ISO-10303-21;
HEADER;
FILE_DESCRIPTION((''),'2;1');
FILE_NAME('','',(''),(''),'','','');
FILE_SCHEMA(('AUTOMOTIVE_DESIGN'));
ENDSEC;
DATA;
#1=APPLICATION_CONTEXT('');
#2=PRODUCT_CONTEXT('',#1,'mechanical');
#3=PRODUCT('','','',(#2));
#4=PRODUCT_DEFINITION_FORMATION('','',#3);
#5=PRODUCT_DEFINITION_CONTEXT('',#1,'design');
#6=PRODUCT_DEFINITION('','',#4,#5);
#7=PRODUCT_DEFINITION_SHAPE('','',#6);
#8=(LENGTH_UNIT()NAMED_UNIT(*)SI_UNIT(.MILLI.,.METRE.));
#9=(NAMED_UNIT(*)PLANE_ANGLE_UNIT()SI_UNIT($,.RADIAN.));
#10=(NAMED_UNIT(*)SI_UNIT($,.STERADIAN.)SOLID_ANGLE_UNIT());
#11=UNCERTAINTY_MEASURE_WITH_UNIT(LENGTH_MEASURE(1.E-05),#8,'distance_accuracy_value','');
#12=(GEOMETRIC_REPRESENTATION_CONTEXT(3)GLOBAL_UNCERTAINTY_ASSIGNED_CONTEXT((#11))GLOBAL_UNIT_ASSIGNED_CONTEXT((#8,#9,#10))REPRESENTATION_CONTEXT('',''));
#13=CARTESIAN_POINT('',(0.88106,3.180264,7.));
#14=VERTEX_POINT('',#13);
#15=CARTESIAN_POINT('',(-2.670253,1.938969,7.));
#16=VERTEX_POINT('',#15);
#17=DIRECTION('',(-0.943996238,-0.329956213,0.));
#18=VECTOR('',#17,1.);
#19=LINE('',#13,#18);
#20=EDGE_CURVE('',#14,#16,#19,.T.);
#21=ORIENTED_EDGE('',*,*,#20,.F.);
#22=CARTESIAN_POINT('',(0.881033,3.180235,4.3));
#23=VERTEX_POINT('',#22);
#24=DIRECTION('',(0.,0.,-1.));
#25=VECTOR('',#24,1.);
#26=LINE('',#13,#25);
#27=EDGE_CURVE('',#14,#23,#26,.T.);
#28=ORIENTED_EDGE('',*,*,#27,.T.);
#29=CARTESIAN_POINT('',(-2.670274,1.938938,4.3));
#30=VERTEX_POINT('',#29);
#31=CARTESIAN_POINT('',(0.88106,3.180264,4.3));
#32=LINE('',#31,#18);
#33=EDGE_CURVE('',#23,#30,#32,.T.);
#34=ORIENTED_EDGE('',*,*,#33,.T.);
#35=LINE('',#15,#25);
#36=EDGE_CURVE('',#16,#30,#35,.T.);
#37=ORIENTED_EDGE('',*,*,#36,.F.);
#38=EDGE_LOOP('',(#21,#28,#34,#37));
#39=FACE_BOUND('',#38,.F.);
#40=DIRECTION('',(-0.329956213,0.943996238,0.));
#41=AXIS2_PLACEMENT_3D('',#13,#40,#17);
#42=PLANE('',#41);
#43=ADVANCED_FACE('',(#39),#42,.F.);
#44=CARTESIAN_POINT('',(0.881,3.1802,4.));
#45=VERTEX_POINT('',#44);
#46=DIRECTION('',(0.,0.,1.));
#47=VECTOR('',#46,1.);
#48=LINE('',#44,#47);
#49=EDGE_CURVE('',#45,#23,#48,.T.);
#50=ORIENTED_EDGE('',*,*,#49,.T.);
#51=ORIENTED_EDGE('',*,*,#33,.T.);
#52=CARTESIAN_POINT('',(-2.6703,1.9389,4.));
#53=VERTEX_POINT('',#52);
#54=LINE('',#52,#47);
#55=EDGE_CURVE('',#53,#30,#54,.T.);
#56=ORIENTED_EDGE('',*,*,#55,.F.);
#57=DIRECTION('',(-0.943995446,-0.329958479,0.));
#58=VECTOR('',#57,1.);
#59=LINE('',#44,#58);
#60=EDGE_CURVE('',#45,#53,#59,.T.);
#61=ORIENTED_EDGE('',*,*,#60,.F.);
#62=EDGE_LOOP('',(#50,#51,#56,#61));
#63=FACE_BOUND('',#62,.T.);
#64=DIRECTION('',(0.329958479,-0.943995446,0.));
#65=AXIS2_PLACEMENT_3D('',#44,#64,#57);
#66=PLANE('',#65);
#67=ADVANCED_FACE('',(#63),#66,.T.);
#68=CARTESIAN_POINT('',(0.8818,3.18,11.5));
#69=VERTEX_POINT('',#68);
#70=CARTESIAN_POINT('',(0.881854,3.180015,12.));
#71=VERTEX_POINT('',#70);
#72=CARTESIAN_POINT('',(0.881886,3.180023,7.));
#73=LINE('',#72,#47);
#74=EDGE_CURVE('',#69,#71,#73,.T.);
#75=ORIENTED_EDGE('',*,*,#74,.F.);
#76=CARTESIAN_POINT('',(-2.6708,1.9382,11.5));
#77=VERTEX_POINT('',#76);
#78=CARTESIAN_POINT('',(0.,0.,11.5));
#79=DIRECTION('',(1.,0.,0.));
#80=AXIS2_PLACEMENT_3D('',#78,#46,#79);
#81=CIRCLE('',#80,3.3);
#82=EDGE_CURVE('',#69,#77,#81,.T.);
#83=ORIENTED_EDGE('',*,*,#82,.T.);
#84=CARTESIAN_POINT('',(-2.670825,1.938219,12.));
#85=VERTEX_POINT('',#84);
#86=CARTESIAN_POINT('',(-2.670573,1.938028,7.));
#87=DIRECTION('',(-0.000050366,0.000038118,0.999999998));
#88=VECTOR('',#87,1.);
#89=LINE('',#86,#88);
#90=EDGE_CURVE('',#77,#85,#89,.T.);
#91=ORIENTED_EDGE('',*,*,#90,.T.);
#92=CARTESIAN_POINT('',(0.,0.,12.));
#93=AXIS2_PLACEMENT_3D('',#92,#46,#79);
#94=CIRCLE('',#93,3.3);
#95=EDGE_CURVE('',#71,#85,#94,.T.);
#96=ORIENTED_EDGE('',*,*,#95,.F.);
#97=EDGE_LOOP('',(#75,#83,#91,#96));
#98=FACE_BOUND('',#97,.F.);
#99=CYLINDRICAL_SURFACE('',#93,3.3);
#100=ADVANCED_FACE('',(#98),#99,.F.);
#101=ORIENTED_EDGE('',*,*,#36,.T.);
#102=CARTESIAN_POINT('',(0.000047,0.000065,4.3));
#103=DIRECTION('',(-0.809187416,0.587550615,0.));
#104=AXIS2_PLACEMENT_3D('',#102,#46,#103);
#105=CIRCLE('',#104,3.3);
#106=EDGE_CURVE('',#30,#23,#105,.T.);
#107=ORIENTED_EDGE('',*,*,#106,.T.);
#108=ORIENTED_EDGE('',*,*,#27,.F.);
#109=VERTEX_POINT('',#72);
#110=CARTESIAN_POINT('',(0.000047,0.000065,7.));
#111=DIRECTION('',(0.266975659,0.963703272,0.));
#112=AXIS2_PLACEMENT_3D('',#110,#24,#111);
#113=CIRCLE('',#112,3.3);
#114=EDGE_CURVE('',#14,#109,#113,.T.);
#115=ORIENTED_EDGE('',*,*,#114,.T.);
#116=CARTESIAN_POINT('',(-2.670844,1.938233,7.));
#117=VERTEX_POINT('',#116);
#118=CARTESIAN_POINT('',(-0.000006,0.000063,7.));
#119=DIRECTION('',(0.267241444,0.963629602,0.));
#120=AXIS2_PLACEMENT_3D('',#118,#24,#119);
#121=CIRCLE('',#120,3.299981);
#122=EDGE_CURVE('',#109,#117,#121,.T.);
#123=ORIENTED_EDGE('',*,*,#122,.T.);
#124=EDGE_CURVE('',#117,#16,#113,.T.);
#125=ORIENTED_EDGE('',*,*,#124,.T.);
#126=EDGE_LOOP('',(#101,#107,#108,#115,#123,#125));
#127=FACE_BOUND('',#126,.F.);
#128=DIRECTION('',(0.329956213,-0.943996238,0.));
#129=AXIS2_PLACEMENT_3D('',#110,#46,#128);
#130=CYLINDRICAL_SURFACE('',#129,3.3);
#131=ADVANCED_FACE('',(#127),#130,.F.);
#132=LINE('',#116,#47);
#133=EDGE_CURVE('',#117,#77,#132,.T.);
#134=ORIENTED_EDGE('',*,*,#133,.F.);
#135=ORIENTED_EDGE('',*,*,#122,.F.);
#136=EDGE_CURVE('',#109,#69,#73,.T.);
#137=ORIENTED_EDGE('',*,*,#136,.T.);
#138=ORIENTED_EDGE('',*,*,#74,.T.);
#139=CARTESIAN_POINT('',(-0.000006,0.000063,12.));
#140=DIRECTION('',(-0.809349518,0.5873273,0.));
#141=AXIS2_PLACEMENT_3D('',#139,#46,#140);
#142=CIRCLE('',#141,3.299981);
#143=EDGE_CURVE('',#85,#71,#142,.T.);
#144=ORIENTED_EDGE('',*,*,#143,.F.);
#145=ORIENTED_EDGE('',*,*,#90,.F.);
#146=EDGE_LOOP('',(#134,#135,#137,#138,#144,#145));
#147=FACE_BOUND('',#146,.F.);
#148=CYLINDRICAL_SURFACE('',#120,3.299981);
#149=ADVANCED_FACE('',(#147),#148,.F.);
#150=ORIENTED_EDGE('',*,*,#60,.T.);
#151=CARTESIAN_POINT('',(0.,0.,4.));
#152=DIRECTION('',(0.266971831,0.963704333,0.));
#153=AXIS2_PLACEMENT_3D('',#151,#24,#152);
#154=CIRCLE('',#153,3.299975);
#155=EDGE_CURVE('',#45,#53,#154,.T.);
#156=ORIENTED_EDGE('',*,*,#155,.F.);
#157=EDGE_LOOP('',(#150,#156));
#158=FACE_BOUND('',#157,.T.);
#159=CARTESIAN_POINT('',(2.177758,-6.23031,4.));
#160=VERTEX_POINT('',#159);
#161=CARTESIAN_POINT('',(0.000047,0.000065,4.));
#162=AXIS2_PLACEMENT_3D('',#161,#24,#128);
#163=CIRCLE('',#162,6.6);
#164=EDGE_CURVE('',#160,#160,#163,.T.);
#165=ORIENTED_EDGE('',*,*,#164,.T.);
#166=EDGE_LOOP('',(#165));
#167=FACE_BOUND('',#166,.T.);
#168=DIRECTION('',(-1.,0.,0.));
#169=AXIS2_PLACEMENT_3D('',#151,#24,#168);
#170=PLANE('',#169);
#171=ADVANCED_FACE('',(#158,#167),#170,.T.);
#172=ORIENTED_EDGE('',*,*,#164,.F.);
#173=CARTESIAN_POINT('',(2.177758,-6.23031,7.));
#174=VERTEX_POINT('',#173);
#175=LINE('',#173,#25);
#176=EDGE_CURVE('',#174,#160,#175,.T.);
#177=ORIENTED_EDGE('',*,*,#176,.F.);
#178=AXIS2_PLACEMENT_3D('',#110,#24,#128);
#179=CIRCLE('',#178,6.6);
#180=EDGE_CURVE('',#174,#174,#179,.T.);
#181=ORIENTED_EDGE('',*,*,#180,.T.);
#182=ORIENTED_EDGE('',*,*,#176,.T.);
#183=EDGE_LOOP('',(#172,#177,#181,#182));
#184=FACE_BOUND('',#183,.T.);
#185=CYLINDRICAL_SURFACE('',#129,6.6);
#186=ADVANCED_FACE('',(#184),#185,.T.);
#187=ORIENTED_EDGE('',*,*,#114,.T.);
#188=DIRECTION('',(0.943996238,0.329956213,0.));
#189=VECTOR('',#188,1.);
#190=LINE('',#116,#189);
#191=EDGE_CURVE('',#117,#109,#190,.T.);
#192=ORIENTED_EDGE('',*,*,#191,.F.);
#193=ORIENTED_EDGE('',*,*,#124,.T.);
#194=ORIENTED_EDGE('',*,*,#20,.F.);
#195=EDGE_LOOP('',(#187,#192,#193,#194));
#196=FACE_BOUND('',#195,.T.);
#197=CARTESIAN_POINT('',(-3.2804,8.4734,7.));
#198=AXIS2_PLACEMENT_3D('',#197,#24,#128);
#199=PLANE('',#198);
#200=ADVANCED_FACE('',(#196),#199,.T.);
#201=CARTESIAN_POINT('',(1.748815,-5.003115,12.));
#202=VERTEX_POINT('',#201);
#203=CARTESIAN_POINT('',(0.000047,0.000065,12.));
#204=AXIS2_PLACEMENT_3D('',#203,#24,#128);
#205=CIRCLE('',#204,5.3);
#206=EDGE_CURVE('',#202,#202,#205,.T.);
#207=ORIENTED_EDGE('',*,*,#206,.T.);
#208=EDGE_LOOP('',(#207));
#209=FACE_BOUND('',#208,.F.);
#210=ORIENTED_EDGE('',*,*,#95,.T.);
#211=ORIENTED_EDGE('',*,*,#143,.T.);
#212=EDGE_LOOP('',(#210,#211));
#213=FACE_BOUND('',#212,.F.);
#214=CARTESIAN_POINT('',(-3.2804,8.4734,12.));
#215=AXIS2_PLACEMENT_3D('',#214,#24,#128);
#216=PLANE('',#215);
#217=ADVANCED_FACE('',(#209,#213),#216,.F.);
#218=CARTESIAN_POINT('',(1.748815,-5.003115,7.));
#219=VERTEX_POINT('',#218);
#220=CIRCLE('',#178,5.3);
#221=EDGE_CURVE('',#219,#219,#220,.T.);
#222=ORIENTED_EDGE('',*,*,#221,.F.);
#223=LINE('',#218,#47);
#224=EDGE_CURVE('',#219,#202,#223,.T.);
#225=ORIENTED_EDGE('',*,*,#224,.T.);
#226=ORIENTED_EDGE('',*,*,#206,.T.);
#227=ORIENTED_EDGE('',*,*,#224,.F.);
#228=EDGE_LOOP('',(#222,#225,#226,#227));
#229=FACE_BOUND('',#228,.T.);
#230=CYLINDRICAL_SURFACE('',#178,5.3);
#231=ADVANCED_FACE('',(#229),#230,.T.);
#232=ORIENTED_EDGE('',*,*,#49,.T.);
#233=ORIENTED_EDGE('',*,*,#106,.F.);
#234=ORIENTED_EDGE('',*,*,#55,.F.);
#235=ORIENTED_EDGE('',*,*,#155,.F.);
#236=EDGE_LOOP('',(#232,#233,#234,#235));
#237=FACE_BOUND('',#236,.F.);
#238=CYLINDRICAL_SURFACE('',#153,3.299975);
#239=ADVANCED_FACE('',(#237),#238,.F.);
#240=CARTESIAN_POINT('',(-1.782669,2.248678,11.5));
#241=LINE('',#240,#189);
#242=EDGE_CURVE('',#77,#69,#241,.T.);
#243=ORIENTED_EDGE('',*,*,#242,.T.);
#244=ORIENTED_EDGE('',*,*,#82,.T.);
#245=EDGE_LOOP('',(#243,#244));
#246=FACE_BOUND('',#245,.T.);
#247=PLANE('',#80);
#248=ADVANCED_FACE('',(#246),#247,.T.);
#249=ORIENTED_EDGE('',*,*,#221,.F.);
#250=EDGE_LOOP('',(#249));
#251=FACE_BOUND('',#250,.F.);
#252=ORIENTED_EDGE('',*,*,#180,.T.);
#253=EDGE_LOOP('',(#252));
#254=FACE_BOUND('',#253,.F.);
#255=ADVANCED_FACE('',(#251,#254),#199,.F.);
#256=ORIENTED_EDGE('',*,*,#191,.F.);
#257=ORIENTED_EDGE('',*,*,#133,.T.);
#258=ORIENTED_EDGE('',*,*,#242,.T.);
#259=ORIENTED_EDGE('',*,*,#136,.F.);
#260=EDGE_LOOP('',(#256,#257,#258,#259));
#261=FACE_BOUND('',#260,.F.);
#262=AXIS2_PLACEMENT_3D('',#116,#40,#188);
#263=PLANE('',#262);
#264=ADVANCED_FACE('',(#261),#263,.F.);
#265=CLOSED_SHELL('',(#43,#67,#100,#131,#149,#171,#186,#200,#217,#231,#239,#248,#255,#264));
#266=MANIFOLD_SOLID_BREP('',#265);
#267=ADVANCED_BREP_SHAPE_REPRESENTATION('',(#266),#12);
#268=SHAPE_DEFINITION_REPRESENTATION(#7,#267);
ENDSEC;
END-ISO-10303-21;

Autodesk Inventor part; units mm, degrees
ref_plane "YZ Plane" through (0, 0, 0) normal (1, 0, 0) x (0, 1, 0)
ref_plane "XZ Plane" through (0, 0, 0) normal (0, 1, 0) x (-1, 0, 0)
ref_plane "XY Plane" through (0, 0, 0) normal (0, 0, 1) x (1, 0, 0)
ref_plane "Work Plane1" through (-3.2804, 8.4734, 7) normal (0, 0, -1) x (0.3299562, -0.9439962, 0)
sketch "Sketch5" plane through (-3.2804, 8.4734, 7) normal (0, 0, -1) x (0.3299562, -0.9439962, 0)
  circle A0 centre (9.0812, -0.3009) radius 5.6 projected
  circle A1 centre (9.0812, -0.3009) radius 6.6
  point P0 (9.0812, -0.3009)
  dimension "d13" = 1
extrude "Extrusion4" add sketch "Sketch5" along normal blind 3
sketch "Sketch6" plane through (0, 0, 7) normal (0, 0, 1) x (1, 0, 0)
  circle A0 centre (0, 0) radius 6.6 projected
  circle A1 centre (0, 0) radius 5.6 projected
  point P0 (0, 0)
extrude "Extrusion5" cut sketch "Sketch6" against normal blind 0.3
sketch "Sketch11" plane through (-3.2804, 8.4734, 7) normal (0, 0, -1) x (0.3299562, -0.9439962, 0)
  circle A0 centre (9.0812, -0.3009) radius 6.6
  circle A1 centre (9.0812, -0.3009) radius 3.3
  line L0 (6.3698, -2.1819) -> (6.3698, 1.5801)
  dimension "d26" = 13.2
  dimension "d27" = 6.6
  dimension "d28" = 3.762
extrude "Extrusion10" add sketch "Sketch11" along normal blind 2.7 contours A0 | L0 A1 picked at (6.2456, 0.0906)
sketch "Sketch13" plane through (-3.2804, 8.4734, 7) normal (0, 0, -1) x (0.3299562, -0.9439962, 0)
  circle A0 centre (9.0812, -0.3009) radius 5.3
  arc A1 (6.3703, -2.1826) -> (6.3703, 1.5809) centre (9.0812, -0.3009) ccw projected
  line L0 (6.3703, 1.5809) -> (6.3703, -2.1826) projected
  dimension "d33" = 10.6
extrude "Extrusion12" add sketch "Sketch13" against normal blind 5
sketch "Sketch14" plane through (0, 0, 4) normal (0, 0, -1) x (-1, 0, 0)
  line L0 (-0.881, 3.1802) -> (2.6703, 1.9389) projected
  arc A0 (-0.881, 3.1802) -> (2.6703, 1.9389) centre (0, 0) ccw projected
  circle A1 centre (0, 0) radius 5.6 projected
  point P0 (0, 0)
extrude "Extrusion13" add sketch "Sketch14" against normal up to surface (0.3 mm away)
sketch "Sketch15" plane through (0, 0, 12) normal (0, 0, 1) x (1, 0, 0)
  arc A0 (-2.6708, 1.9382) -> (0.8818, 3.18) centre (0, 0) ccw projected
  circle A1 centre (0, 0) radius 3.3
  point P0 (0, 0)
extrude "Extrusion14" cut sketch "Sketch15" against normal blind 0.5
properties part number "BlankLargeGearMotorInput"
